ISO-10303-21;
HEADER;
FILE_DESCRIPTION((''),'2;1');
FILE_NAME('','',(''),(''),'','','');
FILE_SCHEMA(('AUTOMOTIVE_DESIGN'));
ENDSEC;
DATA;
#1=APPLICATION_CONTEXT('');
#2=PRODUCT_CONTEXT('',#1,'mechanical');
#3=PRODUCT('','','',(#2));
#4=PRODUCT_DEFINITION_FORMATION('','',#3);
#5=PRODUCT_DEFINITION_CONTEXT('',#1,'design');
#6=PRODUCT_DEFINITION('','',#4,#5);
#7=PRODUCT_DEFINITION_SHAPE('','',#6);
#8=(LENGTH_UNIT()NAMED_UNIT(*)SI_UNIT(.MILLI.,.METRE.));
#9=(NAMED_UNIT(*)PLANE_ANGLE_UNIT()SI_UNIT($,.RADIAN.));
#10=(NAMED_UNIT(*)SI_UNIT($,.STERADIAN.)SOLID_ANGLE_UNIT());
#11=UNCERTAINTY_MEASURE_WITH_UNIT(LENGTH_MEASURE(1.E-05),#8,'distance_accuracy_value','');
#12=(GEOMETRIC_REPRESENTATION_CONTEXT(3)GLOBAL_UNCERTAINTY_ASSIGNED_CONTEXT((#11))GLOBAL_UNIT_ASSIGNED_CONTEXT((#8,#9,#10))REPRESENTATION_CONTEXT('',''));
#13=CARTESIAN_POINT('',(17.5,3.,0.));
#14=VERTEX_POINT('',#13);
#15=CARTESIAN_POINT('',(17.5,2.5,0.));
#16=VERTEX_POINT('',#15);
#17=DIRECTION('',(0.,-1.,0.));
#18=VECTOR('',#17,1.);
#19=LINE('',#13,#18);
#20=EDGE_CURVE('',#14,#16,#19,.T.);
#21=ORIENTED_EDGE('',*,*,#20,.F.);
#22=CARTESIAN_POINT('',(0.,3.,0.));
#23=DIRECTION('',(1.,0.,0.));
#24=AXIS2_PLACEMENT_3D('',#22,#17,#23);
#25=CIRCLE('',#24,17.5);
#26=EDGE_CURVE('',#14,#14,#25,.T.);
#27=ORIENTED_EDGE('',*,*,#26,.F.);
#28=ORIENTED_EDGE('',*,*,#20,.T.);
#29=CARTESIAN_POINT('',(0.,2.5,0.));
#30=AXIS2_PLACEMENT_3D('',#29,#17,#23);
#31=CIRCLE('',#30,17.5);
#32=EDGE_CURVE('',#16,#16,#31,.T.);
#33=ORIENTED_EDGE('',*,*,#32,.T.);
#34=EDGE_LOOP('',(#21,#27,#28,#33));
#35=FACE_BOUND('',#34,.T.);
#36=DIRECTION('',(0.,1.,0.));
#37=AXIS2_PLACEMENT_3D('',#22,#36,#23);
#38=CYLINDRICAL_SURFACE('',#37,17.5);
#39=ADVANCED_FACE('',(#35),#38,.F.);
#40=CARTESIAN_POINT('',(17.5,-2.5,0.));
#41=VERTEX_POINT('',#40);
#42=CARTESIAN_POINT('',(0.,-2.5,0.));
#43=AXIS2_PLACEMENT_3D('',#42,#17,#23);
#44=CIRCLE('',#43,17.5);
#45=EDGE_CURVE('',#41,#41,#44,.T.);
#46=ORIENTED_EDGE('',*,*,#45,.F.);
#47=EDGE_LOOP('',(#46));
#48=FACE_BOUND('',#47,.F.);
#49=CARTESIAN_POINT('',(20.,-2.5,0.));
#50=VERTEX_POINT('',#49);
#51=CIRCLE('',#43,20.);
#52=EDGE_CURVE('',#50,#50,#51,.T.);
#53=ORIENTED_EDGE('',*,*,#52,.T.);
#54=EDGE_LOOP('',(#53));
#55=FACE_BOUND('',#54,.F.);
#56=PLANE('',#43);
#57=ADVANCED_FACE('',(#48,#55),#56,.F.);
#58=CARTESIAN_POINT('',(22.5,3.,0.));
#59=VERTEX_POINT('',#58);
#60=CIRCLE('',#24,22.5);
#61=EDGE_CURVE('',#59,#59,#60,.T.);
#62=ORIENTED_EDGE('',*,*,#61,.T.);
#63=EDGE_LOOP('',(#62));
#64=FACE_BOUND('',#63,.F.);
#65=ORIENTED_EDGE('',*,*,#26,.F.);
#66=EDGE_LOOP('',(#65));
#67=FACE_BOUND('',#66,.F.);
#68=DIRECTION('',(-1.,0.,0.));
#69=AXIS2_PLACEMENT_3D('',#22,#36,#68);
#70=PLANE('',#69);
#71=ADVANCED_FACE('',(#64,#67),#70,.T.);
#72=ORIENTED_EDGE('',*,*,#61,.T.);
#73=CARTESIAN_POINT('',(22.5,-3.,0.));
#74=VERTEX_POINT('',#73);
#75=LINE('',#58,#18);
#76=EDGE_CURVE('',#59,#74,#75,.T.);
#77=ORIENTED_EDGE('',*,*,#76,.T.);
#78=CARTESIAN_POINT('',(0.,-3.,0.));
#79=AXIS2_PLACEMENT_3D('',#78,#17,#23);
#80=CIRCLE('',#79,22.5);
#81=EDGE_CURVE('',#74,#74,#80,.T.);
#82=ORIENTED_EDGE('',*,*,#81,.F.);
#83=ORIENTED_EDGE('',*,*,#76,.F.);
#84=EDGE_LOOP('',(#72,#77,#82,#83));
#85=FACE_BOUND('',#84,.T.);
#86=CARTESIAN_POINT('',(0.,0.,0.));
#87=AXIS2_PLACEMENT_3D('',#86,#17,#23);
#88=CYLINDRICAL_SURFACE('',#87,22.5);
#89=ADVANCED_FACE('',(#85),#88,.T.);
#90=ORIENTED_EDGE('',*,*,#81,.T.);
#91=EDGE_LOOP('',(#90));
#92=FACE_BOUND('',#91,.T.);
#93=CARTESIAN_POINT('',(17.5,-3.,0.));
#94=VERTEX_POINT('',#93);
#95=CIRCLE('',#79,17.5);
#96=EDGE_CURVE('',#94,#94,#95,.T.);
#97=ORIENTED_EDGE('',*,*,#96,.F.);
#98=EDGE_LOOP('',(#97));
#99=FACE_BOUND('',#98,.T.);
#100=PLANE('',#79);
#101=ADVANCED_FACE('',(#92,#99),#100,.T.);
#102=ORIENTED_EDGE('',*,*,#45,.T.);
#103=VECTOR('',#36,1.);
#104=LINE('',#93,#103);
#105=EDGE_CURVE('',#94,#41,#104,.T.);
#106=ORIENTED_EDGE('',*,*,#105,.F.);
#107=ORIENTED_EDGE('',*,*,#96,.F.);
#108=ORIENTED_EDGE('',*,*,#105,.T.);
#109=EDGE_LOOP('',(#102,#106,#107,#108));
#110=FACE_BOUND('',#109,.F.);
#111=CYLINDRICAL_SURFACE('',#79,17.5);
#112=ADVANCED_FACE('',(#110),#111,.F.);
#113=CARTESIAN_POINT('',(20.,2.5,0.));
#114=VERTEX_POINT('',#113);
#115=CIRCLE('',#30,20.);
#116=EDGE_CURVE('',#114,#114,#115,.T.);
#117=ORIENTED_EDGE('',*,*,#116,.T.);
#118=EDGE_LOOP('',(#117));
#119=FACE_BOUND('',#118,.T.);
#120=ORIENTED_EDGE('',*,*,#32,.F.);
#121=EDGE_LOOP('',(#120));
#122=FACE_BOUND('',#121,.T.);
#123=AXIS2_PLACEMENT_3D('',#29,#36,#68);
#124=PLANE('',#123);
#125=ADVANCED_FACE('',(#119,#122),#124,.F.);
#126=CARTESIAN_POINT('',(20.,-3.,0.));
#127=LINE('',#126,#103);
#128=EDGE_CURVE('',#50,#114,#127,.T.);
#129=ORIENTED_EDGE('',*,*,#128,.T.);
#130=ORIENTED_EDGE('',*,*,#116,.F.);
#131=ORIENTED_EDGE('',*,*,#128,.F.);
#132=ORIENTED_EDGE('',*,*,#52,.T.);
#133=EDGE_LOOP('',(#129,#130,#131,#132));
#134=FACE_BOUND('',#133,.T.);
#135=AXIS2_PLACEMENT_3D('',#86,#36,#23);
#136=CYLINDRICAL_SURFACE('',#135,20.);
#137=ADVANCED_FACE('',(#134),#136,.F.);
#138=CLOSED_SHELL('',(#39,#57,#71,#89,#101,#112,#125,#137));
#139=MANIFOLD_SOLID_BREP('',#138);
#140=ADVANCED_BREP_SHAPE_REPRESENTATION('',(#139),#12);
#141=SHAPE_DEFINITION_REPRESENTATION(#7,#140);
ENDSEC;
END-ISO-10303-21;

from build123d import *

# Parameters (mm, degrees)
F0_R     = 22.5
F0_R_2   = 20
F1_DEPTH = 3
F2_R     = 20
F2_R_2   = 17.5
F3_DEPTH = 0.5


# Not quite as in the source:
# - a pattern or mirror of a feature is missing from the dataset's text; its kind, count and spacing are read off the source's solid


with BuildPart() as f1:
    # F0 (on Front) → F1 (new body, symmetric)
    with BuildSketch(Plane.XZ):
        Circle(F0_R)
        Circle(F0_R_2, mode=Mode.SUBTRACT)
    extrude(amount=F1_DEPTH, both=True)

    # F2 (on face) → F3 (join)
    with BuildSketch(Plane.XZ.offset(3)):
        Circle(F2_R)
        Circle(F2_R_2, mode=Mode.SUBTRACT)
    f3 = extrude(amount=-F3_DEPTH)

    # F3_copies: F3 across plane
    add(f3.mirror(Plane.ZX))


solid = f1.part
